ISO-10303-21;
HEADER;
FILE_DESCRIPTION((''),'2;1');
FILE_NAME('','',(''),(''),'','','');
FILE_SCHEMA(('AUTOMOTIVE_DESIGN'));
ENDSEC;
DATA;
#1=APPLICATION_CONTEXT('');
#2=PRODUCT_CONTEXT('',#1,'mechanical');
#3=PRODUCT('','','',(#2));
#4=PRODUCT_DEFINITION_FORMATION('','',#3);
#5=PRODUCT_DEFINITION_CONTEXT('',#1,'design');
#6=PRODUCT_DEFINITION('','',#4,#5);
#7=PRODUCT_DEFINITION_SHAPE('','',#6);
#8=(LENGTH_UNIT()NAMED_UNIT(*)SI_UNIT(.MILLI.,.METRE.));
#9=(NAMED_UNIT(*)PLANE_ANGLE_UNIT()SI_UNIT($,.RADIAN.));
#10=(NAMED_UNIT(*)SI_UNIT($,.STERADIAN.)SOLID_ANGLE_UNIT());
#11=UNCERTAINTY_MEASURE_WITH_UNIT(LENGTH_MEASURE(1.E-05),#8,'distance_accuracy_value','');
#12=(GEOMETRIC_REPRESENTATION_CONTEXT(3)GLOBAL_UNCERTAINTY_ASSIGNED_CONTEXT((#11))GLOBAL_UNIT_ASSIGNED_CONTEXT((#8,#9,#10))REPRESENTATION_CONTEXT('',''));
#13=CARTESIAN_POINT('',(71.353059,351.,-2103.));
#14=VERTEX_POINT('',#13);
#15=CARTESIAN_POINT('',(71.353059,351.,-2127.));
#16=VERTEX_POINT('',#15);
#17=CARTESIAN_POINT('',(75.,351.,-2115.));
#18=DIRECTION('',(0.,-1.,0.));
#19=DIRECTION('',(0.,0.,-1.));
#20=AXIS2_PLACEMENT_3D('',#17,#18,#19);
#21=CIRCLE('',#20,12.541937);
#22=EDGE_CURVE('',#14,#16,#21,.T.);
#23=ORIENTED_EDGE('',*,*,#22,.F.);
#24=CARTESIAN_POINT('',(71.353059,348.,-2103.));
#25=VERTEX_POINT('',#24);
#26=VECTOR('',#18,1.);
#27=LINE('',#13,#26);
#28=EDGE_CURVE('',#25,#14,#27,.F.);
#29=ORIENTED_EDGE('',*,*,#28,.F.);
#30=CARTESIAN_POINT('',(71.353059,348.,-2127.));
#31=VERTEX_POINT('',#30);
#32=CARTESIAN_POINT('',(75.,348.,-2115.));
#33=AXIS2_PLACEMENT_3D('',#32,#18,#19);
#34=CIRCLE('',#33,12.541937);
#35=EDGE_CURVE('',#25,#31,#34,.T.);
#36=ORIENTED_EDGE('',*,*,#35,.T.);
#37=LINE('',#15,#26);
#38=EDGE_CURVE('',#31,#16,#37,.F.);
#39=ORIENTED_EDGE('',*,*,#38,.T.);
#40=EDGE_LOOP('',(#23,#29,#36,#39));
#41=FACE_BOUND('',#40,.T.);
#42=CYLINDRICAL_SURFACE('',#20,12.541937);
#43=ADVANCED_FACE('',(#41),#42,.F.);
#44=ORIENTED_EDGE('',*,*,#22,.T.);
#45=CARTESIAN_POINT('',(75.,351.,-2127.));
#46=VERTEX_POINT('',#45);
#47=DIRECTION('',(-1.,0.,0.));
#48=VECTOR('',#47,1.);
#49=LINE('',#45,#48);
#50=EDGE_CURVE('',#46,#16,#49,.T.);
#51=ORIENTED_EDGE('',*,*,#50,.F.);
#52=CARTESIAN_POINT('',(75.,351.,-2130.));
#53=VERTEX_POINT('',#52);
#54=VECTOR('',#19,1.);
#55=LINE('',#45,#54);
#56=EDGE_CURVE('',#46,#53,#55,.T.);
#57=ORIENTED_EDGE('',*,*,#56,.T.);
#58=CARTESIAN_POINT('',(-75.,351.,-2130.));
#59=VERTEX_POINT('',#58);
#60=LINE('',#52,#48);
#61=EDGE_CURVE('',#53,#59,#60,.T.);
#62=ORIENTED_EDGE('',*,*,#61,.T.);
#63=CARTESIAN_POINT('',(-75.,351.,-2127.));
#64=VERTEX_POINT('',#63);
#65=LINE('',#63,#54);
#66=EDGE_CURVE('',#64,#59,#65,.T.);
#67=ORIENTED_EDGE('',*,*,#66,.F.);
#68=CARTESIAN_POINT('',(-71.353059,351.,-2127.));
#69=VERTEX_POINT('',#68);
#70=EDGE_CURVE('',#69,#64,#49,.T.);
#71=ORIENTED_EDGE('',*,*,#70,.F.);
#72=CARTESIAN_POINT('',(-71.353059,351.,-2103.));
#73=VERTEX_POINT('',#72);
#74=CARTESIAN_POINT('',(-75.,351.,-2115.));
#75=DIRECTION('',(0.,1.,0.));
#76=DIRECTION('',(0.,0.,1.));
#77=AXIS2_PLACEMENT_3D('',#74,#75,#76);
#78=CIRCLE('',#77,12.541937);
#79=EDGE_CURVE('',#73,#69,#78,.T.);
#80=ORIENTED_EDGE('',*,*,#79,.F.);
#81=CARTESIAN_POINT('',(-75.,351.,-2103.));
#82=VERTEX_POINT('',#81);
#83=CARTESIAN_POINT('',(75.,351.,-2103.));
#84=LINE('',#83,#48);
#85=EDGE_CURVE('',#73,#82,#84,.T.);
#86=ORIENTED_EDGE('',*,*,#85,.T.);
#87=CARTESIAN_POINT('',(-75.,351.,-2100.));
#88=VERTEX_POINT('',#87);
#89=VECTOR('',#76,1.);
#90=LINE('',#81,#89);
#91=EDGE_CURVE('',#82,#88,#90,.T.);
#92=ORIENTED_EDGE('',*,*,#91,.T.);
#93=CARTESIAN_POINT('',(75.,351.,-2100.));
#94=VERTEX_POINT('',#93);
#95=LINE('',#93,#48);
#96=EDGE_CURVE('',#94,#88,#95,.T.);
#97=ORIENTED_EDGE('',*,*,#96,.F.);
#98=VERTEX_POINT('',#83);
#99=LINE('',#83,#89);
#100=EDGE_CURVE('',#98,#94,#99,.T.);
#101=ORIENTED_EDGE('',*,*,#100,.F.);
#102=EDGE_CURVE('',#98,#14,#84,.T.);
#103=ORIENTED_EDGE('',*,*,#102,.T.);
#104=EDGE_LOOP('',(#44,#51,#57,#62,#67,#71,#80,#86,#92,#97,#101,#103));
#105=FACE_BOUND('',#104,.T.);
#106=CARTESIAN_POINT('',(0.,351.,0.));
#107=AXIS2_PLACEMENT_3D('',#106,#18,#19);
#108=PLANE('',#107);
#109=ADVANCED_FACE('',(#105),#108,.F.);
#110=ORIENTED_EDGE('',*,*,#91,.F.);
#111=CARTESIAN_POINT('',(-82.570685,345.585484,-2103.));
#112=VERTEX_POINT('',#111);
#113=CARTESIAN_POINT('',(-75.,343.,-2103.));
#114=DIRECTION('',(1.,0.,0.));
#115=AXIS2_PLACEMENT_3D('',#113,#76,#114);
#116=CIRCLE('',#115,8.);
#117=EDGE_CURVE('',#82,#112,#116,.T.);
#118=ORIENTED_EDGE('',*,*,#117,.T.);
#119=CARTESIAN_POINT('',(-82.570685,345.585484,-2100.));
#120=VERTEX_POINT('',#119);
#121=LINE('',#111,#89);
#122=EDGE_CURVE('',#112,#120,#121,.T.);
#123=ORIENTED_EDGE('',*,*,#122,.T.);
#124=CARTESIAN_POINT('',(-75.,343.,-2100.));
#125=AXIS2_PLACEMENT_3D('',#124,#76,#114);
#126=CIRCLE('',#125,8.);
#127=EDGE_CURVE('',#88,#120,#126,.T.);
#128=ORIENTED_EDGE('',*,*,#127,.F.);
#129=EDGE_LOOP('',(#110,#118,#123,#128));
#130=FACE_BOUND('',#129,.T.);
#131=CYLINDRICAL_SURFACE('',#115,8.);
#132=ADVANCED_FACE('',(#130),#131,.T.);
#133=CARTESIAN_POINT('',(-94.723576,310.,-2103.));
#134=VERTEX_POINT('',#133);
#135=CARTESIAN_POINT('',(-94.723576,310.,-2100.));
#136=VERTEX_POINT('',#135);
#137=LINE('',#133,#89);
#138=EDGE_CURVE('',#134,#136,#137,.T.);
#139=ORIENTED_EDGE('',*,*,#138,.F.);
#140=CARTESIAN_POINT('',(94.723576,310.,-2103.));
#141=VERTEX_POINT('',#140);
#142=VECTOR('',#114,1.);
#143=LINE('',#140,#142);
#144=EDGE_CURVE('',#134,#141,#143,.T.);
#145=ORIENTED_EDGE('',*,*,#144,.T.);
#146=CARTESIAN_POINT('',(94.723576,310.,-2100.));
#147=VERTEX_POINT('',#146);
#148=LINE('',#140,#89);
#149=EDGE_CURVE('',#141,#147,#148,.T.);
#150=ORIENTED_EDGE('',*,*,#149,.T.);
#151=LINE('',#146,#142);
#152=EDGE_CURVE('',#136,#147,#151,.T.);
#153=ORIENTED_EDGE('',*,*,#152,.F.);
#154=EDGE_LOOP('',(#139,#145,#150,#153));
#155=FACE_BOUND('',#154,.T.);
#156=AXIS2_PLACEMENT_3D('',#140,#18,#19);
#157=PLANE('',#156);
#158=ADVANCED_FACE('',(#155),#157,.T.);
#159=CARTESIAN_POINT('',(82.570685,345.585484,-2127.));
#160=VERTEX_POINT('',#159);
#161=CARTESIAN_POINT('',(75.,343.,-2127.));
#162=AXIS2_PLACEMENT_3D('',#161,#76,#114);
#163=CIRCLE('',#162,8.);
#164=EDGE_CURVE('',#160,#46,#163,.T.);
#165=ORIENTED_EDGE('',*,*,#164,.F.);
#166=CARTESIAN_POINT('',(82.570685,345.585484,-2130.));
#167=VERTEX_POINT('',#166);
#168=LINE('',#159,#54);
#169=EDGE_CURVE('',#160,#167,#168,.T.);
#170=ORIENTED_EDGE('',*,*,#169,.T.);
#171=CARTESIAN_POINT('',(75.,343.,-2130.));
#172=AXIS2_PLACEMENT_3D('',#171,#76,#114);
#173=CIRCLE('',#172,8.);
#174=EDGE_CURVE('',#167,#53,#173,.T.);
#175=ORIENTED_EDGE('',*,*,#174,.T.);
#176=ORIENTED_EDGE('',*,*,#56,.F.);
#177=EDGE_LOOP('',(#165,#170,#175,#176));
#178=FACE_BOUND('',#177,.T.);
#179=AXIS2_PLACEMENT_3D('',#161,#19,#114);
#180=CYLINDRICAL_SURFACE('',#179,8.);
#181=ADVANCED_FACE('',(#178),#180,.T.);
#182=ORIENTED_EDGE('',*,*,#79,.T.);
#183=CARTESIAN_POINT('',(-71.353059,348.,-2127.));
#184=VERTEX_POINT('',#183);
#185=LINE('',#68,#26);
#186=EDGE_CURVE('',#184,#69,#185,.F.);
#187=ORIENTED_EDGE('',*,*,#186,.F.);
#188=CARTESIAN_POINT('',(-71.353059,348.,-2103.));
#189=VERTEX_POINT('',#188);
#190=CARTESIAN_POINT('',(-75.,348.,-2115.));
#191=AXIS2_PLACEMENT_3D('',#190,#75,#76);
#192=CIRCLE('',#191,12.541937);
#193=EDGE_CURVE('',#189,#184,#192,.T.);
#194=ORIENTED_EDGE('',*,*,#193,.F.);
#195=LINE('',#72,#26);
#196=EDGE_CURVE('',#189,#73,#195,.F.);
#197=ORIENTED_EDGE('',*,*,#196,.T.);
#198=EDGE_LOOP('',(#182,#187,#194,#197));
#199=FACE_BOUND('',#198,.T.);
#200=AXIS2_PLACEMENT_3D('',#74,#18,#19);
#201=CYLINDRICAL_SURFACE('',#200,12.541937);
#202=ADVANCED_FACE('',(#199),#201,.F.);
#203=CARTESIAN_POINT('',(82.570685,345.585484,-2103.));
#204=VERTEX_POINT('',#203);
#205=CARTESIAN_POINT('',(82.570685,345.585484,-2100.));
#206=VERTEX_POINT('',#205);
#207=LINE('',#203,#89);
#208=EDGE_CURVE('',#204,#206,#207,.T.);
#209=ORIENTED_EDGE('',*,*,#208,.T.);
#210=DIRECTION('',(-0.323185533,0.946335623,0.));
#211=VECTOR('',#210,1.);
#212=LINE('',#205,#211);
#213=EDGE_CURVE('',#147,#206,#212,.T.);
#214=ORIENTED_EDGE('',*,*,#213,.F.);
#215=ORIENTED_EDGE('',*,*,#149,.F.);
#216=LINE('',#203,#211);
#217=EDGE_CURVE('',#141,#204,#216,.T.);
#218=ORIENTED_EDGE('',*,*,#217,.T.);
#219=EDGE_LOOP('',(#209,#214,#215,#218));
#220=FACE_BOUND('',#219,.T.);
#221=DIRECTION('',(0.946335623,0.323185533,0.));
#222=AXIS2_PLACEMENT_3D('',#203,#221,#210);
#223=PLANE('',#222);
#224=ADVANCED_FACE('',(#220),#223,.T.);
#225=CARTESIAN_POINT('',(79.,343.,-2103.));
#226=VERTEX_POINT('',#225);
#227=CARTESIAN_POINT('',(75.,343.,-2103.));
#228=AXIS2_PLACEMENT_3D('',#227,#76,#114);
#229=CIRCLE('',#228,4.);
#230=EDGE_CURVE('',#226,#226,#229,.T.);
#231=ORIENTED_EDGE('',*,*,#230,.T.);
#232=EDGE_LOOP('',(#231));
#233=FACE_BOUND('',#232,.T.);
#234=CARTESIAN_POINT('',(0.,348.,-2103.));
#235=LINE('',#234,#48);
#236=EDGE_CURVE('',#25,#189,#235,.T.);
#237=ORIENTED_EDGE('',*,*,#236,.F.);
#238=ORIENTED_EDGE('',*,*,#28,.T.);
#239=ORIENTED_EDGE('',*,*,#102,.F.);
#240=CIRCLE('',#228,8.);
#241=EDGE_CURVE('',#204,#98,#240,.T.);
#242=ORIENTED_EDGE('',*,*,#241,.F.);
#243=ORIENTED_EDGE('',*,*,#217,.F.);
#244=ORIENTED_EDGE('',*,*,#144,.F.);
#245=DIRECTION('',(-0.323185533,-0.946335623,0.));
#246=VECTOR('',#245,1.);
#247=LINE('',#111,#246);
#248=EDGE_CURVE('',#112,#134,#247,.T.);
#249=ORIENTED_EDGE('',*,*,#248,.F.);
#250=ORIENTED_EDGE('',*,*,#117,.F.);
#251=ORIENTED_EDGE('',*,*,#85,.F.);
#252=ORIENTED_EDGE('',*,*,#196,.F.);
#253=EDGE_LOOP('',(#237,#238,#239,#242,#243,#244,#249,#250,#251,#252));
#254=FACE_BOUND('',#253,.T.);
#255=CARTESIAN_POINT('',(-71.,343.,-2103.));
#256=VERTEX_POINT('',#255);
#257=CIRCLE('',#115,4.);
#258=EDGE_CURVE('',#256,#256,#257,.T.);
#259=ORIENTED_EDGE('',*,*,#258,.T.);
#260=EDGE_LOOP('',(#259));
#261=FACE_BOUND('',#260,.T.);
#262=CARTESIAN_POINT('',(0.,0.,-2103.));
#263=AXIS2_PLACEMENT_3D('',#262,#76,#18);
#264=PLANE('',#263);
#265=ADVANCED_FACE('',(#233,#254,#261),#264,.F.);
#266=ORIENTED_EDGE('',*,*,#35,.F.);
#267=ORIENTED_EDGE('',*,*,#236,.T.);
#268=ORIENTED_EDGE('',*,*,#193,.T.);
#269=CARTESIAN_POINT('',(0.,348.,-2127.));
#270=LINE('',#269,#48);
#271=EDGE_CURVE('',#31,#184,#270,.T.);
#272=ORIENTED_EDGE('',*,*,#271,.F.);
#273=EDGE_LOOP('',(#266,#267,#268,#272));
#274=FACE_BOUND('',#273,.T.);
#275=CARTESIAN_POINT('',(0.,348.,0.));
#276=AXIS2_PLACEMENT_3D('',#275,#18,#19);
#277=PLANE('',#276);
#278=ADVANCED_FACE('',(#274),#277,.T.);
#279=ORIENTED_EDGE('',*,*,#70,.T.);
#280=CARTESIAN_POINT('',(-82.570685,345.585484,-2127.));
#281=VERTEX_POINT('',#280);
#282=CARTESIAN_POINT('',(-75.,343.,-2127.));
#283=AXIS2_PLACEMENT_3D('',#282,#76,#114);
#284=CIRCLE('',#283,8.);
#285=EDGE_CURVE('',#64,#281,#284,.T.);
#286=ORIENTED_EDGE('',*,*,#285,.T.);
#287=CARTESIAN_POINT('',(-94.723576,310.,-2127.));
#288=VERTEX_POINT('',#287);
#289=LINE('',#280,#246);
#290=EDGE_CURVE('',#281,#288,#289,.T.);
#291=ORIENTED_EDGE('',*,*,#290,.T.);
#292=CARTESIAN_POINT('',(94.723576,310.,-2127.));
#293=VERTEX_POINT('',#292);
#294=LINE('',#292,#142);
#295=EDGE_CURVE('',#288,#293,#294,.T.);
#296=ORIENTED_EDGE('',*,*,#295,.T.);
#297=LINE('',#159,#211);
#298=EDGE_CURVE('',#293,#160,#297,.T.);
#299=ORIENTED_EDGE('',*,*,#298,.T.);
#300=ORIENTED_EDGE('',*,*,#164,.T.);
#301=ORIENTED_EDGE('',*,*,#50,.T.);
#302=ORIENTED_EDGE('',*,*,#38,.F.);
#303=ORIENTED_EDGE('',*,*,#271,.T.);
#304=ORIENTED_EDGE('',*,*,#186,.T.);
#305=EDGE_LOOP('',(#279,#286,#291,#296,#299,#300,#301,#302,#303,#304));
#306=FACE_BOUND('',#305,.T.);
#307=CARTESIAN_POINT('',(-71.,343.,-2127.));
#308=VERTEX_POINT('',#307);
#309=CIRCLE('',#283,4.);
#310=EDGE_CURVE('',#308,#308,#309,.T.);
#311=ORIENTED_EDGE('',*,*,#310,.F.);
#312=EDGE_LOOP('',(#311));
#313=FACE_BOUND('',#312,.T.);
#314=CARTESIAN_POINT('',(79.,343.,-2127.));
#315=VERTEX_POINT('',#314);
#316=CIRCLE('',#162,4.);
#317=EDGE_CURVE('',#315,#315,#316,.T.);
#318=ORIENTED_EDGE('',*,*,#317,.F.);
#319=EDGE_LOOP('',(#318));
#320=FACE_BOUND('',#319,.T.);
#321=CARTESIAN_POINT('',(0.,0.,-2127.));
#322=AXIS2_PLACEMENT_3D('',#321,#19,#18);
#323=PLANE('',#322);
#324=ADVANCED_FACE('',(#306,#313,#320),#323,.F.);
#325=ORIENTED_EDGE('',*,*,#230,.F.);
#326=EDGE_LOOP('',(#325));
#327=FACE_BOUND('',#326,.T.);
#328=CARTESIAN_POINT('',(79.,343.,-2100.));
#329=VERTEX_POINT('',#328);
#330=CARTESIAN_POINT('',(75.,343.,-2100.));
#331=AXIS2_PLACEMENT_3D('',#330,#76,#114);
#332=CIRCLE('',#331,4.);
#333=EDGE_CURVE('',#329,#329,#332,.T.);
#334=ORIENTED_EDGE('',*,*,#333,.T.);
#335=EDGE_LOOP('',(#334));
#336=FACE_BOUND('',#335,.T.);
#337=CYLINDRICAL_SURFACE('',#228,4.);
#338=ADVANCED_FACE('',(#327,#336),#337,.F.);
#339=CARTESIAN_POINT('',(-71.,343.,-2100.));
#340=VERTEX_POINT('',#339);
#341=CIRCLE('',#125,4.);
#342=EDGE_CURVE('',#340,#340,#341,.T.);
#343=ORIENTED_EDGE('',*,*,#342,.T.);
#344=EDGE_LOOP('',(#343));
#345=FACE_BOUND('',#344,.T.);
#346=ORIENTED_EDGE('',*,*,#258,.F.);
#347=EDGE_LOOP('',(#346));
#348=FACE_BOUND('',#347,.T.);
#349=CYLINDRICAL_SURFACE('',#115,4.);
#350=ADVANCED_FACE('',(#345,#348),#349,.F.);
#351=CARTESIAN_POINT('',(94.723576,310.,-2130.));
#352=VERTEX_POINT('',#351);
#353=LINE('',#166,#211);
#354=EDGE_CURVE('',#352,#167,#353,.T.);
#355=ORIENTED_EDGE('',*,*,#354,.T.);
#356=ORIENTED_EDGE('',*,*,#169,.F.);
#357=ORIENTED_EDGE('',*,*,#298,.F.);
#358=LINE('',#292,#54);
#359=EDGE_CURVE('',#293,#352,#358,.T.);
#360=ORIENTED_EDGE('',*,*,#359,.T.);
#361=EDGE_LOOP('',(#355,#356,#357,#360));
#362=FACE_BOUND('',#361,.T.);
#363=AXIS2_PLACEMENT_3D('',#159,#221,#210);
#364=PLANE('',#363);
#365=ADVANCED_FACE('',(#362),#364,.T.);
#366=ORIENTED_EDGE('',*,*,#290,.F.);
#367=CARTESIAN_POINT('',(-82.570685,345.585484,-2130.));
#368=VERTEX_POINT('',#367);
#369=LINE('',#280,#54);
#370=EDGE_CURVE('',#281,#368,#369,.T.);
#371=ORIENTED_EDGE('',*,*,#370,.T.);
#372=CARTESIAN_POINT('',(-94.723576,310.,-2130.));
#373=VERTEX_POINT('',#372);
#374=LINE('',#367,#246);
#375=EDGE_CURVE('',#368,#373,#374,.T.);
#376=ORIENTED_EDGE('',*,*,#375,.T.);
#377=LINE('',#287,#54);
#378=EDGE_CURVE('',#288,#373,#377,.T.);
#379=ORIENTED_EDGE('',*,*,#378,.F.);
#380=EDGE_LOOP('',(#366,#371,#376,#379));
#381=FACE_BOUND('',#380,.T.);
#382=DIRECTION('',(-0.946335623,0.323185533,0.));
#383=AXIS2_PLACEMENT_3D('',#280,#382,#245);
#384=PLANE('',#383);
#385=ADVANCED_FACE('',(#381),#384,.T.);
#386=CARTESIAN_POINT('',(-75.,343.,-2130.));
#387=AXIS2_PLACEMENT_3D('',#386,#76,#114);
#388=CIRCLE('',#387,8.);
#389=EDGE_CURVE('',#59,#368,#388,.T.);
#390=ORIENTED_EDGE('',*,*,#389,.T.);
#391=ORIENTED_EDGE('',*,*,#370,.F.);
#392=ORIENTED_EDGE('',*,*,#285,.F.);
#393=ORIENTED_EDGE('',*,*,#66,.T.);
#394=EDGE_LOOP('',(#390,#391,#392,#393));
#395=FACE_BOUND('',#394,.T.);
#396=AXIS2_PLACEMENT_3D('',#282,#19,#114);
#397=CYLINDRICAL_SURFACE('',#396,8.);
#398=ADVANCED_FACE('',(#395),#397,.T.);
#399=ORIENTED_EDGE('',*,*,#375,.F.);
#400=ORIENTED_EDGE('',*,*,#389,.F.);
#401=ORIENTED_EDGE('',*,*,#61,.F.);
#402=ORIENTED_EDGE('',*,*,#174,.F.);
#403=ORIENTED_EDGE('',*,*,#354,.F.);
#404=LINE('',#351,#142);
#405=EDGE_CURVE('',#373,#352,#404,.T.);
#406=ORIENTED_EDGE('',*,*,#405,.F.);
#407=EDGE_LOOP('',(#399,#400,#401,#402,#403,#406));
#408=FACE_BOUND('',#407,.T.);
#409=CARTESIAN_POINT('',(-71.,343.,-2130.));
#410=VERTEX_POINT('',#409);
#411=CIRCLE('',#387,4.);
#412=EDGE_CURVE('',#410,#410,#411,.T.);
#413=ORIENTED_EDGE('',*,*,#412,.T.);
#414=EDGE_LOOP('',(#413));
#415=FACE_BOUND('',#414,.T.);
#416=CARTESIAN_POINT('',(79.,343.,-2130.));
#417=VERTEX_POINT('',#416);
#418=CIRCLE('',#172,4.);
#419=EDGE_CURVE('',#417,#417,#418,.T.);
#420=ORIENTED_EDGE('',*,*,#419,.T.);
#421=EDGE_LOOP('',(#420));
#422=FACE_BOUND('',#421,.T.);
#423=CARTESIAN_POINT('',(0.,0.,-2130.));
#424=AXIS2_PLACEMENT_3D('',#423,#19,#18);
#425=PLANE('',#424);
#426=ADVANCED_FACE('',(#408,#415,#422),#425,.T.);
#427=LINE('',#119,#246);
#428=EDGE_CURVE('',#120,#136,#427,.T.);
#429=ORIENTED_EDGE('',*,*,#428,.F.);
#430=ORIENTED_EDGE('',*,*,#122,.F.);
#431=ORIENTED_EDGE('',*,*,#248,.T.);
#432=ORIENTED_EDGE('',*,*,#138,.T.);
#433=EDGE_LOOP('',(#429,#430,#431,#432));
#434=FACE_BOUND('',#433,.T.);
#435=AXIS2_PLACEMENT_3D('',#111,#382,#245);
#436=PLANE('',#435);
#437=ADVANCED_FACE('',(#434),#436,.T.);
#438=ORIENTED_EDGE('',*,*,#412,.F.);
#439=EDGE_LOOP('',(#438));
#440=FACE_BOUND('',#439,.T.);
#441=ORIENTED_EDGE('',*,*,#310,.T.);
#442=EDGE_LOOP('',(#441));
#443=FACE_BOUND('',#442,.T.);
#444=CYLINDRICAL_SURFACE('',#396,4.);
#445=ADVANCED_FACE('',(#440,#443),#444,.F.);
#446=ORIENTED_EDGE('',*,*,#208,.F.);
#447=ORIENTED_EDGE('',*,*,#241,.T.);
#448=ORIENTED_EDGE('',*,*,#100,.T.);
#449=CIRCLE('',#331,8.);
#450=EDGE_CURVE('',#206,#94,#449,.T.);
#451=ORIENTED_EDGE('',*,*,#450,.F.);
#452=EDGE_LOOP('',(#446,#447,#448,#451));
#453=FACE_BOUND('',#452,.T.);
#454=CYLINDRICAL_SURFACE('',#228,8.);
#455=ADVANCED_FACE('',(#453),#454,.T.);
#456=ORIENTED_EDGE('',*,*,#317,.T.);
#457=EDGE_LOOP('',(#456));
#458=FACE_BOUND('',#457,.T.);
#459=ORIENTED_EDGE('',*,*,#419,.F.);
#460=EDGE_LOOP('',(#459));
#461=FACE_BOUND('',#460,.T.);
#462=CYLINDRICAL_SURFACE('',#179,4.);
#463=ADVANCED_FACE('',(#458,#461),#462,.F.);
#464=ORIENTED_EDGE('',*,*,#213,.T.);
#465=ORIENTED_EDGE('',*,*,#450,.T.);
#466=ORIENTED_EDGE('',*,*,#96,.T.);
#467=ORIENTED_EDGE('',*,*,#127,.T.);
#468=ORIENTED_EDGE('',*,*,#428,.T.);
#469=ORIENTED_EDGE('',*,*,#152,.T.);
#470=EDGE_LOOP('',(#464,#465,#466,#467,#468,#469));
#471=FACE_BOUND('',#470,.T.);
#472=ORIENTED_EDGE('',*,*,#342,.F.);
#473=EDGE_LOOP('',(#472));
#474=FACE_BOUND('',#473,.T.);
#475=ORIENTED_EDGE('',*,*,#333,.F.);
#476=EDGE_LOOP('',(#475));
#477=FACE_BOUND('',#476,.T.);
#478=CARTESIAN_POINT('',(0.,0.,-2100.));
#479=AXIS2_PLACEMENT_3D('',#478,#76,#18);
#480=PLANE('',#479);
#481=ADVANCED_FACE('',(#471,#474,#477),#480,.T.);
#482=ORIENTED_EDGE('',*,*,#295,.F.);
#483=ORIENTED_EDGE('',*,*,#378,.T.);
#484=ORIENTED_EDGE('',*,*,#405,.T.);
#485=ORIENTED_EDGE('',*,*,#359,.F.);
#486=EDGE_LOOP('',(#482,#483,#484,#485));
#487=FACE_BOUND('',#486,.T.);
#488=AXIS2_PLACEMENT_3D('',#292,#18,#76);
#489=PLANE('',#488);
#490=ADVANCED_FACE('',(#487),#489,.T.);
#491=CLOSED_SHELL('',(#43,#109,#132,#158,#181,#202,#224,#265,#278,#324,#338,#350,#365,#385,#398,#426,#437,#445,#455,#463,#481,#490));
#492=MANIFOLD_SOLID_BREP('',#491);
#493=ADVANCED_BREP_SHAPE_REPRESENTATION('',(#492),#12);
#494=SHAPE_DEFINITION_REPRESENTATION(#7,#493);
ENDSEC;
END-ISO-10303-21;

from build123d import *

# Parameters (mm, degrees)
BOSS_EXTRUDE5_START = 348
BOSS_EXTRUDE5_DEPTH = 3
BOSS_EXTRUDE6_START = -12
F_3DSKETCH1_R       = 4
BOSS_EXTRUDE6_DEPTH = 3


# Read off the part's stored shape, not the designer's step: Boss-Extrude5
with BuildPart() as part:
    # Boss-Extrude5 outline → Boss-Extrude5 (new body)
    with BuildSketch(Plane(origin=(0, 0, 0), x_dir=(1, 0, 0), z_dir=(0, 1, 0)).offset(BOSS_EXTRUDE5_START)):
        with BuildLine():
            ThreePointArc((-75, 2127.541936718), (-62.458063282, 2115), (-75, 2102.458063282))
            Line((-75, 2102.458063282), (75, 2102.458063282))
            ThreePointArc((75, 2102.458063282), (62.458063282, 2115), (75, 2127.541936718))
            Line((75, 2127.541936718), (-75, 2127.541936718))
        make_face()
    extrude(amount=BOSS_EXTRUDE5_DEPTH)

    # 3DSketch1 → Boss-Extrude6 (add)
    with BuildSketch(Plane(origin=(-82.570684984, 345.585484263, -2115), x_dir=(0.9804457750026082, -0.19678943640230048, 0), z_dir=(0, 0, -1)).offset(BOSS_EXTRUDE6_START)):
        with BuildLine():
            Line((0, 0), (-4.912403262, 37.281198271))
            Line((-4.912403262, 37.281198271), (180.830256509, 0))
            Line((180.830256509, 0), (161.912158463, -32.498077123))
            ThreePointArc((161.912158463, -32.498077123), (158.280606568, -35.768969819), (153.423992856, -36.31688537))
            Line((153.423992856, -36.31688537), (6.357126606, -6.798469909))
            ThreePointArc((6.357126606, -6.798469909), (2.088099295, -4.418908183), (0, 0))
        make_face()
        with Locations(Location((7.931442097, 1.045096291, 0), (0, 0, 348.650723519))):
            Circle(F_3DSKETCH1_R, mode=Mode.SUBTRACT)
        with Locations(Location((154.998308348, -28.47331917, 0), (0, 0, 348.650723519))):
            Circle(F_3DSKETCH1_R, mode=Mode.SUBTRACT)
    extrude(amount=-BOSS_EXTRUDE6_DEPTH)

    # Mirror4: part across plane


with BuildPart() as part_1:
    add(part.part)
    add(part.part.mirror(Plane.XY.offset(-2115)))


solid = part_1.part
